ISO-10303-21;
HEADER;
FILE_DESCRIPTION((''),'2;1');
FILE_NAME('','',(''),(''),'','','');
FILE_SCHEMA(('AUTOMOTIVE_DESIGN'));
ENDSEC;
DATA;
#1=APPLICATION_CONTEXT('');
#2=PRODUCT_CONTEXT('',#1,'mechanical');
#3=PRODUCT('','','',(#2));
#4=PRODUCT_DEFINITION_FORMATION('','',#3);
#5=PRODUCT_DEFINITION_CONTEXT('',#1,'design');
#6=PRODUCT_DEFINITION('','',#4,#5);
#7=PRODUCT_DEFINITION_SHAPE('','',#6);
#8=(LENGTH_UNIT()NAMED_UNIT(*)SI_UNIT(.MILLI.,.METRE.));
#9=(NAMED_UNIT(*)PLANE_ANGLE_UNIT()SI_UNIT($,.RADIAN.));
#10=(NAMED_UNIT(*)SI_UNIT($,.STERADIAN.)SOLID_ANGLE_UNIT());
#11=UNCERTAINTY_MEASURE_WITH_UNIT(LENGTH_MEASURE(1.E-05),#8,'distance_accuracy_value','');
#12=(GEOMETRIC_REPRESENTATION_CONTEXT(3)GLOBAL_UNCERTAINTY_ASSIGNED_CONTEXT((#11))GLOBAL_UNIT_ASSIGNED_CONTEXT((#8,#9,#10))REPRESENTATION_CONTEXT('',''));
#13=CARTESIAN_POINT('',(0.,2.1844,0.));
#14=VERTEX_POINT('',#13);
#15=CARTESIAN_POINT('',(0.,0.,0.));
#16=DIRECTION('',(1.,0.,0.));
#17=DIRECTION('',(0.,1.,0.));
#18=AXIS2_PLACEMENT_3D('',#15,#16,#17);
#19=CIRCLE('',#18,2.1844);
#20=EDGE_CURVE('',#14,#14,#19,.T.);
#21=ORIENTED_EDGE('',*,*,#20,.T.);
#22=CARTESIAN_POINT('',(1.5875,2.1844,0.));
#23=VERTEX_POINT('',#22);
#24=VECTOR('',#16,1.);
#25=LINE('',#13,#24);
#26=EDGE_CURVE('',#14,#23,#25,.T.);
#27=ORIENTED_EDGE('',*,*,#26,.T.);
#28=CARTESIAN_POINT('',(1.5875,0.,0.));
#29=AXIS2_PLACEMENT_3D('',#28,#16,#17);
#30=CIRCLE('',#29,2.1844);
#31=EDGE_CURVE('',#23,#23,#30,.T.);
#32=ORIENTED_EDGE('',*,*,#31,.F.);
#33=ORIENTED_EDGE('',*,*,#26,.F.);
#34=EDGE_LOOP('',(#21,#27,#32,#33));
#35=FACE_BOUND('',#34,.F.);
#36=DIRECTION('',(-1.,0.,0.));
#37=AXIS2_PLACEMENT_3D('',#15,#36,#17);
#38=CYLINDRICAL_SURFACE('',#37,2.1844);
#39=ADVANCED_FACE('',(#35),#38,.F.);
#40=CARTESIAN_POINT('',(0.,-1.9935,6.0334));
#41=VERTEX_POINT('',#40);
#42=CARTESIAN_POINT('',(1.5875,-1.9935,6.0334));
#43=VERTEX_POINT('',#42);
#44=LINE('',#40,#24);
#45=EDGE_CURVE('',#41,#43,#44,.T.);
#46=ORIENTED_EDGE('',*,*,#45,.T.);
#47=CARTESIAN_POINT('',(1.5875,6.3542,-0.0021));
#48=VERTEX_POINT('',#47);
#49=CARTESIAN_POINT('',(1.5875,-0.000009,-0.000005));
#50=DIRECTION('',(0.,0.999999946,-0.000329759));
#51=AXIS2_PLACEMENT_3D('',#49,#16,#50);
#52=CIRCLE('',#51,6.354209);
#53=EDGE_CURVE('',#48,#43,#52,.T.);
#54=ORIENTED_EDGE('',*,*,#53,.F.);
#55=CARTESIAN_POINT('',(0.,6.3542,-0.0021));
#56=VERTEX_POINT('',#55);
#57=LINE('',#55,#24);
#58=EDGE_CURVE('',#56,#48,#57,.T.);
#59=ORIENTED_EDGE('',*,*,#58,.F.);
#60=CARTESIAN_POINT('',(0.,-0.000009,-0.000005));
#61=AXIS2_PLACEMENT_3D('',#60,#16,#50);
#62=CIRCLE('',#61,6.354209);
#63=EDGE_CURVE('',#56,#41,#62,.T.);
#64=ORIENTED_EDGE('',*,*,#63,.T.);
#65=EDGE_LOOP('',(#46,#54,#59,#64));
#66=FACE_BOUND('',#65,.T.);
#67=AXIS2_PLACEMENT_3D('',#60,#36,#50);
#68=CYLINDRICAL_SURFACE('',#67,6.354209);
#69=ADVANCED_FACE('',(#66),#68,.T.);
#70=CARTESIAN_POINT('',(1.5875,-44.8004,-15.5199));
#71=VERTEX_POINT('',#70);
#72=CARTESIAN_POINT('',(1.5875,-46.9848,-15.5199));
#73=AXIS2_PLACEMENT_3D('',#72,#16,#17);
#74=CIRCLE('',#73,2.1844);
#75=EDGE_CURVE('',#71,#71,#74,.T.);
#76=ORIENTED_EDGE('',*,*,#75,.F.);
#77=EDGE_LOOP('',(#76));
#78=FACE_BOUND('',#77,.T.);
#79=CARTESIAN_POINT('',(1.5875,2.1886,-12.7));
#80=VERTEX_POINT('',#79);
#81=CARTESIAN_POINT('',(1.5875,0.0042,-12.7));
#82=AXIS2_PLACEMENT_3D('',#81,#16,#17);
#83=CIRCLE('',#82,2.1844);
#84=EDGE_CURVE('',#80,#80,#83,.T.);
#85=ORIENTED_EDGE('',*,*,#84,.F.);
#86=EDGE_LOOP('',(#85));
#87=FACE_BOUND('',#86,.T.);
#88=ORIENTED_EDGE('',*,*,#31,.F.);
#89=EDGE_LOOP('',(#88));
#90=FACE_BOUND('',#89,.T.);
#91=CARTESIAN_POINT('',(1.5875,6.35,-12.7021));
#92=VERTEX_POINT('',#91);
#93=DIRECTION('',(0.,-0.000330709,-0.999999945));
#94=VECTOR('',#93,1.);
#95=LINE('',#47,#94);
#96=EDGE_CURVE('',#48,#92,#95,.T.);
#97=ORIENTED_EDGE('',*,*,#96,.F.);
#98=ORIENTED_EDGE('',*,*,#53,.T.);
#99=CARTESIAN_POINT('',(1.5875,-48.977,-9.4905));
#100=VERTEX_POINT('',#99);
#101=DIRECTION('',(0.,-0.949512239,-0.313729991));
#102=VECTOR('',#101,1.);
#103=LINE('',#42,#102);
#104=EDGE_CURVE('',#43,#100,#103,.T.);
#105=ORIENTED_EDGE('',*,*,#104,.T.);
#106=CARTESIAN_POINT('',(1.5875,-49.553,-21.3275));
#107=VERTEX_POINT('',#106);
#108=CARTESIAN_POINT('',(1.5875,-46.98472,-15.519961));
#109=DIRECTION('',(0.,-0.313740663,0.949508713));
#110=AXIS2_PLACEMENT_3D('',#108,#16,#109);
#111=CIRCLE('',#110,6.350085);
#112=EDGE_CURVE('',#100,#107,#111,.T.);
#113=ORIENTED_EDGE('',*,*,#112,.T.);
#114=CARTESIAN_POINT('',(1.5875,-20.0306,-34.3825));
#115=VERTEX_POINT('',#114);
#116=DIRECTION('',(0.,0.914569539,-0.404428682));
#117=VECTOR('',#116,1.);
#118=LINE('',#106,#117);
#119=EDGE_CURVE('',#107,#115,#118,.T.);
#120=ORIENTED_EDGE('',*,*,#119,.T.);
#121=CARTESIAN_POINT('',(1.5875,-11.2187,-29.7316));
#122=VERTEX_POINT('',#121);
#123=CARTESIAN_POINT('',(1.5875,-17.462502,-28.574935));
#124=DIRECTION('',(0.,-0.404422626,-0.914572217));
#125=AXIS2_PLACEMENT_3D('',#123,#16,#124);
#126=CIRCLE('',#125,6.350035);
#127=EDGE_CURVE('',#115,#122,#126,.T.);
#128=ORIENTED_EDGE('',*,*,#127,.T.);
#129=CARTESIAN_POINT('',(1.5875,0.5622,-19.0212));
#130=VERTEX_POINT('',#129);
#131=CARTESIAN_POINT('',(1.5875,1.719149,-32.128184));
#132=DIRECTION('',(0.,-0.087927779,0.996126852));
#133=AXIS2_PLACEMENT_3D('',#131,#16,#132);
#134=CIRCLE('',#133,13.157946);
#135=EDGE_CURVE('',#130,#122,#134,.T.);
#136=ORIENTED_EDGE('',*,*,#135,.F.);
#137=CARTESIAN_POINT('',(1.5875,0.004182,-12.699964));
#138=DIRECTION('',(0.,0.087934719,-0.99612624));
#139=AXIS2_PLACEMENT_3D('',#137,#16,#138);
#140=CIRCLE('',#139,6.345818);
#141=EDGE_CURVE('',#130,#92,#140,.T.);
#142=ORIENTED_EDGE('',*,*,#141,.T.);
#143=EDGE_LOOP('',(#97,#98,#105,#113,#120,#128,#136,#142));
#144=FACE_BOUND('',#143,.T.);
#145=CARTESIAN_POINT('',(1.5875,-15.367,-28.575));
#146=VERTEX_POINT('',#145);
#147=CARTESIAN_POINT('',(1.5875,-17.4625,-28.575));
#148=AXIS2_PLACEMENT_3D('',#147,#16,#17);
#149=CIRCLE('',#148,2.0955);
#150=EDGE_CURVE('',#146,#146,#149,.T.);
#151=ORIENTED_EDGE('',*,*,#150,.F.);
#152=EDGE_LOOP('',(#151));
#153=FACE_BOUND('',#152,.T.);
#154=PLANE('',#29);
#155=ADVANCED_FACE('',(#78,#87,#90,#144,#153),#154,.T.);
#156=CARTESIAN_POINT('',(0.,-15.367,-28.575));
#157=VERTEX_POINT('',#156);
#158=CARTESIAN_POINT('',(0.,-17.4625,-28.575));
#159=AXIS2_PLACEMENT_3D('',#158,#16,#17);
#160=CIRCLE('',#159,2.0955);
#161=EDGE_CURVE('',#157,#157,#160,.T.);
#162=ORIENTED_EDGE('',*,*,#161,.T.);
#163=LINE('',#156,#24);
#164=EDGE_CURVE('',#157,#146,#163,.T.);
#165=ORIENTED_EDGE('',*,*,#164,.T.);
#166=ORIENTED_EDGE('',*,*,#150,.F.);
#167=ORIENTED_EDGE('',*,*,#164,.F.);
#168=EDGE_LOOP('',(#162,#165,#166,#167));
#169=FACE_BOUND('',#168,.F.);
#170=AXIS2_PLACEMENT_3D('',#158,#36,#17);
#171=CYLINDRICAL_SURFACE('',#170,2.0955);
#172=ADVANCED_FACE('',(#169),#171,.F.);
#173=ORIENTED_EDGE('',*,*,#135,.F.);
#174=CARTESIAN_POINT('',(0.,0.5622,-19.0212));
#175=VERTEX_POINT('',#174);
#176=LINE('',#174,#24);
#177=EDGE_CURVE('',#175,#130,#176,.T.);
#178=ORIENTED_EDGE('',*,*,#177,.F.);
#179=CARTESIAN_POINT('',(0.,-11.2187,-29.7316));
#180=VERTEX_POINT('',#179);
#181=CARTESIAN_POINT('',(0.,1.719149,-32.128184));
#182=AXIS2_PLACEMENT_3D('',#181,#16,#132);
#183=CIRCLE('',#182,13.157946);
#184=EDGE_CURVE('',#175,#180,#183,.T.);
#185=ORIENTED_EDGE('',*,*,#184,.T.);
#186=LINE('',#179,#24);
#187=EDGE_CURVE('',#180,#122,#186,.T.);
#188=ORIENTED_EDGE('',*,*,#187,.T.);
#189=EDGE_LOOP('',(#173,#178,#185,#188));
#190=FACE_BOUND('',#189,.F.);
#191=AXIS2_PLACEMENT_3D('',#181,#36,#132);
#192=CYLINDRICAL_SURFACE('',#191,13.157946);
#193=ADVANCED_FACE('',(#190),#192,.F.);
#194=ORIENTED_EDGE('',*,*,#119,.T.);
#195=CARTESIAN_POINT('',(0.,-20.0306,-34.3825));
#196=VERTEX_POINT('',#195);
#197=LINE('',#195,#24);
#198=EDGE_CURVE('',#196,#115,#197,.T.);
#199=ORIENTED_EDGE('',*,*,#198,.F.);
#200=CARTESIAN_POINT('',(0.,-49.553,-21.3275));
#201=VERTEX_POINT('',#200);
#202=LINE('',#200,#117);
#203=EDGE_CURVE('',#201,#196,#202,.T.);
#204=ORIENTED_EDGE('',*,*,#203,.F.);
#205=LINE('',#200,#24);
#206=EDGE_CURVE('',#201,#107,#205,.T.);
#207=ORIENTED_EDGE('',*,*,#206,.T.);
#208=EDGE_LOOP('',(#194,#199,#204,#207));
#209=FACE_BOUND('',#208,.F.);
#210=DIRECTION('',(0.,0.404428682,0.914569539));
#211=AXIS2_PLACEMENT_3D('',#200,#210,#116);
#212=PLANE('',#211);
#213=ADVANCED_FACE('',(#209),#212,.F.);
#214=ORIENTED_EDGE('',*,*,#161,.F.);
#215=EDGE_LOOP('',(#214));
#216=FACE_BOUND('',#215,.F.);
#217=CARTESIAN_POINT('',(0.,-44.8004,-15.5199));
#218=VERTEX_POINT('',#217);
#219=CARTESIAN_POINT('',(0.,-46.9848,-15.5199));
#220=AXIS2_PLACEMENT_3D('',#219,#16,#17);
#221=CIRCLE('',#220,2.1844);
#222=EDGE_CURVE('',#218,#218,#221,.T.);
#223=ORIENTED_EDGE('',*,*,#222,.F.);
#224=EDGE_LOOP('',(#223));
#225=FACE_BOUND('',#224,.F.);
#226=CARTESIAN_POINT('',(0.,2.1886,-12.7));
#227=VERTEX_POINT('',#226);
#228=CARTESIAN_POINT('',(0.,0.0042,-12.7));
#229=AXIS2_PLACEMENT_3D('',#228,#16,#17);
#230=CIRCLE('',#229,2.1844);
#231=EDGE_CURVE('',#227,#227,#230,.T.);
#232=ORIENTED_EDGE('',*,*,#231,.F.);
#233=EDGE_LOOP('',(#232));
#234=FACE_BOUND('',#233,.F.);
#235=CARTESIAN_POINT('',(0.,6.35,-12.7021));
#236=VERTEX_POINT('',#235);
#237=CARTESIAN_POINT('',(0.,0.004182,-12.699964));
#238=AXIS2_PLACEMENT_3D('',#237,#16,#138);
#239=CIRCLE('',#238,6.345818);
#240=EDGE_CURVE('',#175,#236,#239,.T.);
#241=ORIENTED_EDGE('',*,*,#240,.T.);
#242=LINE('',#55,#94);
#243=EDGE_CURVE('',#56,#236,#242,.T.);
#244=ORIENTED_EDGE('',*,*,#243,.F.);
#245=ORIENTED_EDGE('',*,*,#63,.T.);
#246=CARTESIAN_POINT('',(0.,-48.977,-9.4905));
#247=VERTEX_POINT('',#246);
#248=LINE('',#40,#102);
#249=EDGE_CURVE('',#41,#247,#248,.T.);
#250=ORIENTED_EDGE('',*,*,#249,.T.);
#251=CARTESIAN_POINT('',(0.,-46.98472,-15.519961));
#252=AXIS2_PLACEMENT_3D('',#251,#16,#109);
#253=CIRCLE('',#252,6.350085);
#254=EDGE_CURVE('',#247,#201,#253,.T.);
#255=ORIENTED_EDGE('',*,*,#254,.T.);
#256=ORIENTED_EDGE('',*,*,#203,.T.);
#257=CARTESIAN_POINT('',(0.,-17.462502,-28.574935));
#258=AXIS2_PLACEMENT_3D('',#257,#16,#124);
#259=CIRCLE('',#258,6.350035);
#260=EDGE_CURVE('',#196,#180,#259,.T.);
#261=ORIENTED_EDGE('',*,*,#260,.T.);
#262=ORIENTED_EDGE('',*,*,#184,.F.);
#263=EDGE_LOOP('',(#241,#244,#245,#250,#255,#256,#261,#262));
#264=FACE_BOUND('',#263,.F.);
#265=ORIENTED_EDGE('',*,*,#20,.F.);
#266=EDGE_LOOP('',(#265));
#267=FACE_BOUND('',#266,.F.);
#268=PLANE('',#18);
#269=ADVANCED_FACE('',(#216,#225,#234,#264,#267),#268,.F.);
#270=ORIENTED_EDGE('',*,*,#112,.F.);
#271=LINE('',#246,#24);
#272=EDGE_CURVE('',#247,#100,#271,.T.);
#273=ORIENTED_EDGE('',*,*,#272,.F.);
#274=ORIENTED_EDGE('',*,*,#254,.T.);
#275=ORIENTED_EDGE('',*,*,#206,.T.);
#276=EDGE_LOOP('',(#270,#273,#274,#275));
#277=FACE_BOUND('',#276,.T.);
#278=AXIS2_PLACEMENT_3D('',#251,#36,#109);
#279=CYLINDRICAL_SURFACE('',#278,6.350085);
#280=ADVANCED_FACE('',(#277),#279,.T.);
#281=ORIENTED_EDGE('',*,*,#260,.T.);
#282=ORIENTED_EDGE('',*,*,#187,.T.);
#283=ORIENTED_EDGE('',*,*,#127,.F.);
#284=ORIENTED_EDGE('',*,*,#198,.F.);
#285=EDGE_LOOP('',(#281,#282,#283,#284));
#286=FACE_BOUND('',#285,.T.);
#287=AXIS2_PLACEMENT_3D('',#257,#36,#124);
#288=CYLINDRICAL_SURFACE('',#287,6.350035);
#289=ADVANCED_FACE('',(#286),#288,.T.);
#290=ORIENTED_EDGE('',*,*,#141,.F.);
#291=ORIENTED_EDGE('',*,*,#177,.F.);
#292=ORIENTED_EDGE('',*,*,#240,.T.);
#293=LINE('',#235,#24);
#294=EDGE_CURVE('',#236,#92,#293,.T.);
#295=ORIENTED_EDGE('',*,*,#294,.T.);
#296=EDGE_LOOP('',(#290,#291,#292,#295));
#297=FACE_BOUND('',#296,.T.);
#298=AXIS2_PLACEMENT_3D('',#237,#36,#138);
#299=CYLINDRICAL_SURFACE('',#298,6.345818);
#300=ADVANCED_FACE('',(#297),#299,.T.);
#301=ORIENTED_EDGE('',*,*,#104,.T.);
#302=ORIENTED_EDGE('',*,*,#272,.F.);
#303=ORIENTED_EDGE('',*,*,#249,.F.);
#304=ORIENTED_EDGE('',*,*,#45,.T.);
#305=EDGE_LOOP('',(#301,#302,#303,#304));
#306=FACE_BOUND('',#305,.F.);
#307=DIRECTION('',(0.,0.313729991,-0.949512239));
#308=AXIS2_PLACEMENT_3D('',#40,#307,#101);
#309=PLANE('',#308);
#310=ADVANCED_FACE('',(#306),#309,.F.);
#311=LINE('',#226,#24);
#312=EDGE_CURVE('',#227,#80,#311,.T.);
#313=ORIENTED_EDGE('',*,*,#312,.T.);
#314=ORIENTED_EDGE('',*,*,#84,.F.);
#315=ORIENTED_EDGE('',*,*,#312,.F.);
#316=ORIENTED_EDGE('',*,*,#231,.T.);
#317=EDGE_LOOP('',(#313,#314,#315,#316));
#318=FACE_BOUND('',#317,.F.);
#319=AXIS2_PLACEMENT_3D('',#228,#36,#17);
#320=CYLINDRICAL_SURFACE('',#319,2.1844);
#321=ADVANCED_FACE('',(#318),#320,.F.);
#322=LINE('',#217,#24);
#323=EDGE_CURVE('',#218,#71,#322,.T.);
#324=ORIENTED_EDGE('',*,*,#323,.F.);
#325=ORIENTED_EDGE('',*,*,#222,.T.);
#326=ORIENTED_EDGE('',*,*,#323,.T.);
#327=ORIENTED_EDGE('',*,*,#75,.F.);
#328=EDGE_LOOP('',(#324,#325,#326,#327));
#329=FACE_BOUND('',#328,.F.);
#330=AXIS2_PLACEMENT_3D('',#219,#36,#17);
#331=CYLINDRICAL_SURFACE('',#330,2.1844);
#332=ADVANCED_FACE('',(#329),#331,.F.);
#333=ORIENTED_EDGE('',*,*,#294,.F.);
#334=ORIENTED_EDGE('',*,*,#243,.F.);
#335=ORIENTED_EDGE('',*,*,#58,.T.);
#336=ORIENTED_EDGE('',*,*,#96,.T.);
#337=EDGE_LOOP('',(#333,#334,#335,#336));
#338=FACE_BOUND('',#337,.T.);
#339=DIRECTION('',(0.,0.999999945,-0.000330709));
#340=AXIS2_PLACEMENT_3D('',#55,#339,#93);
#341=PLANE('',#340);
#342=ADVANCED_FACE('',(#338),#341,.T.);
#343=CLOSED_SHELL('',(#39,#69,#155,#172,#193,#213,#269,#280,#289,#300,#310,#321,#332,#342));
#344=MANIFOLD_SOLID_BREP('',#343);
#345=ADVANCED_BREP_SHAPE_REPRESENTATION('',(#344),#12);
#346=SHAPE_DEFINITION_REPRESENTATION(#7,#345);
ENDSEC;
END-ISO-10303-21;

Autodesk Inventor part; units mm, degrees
ref_plane "YZ Plane" through (0, 0, 0) normal (1, 0, 0) x (0, 1, 0)
ref_plane "XZ Plane" through (0, 0, 0) normal (0, 1, 0) x (-1, 0, 0)
ref_plane "XY Plane" through (0, 0, 0) normal (0, 0, 1) x (1, 0, 0)
sketch "maiin" plane through (0, 0, 0) normal (0, 0, 1) x (1, 0, 0)
  circle A0 centre (-0.0182, -20.0228) radius 2.1844
  circle A1 centre (12.6818, -20.0228) radius 2.1844
  circle A2 centre (-2.8225, 26.9672) radius 2.1844 construction
  arc A3 (-6.3396, -20.5787) -> (-0.0224, -26.3686) centre (-0.0182, -20.0228) ccw
  arc A4 (12.6776, -26.377) -> (18.7159, -18.0313) centre (12.6818, -20.0228) ccw
  arc A5 (3.2076, 28.9574) -> (-8.6291, 29.5373) centre (-2.8225, 26.9672) ccw
  arc A6 (-21.694, 0.0193) -> (-17.0461, -8.7942) centre (-15.8874, -2.5508) ccw
  circle A7 centre (-15.8874, -2.5508) radius 2.0955
  line L0 (18.7159, -18.0313) -> (3.2076, 28.9574)
  line L1 (12.6776, -26.377) -> (-0.0224, -26.3686)
  line L2 (-8.6291, 29.5373) -> (-21.694, 0.0193)
  circle A8 centre (-2.8225, 26.9672) radius 2.1844
  arc A9 (-6.3396, -20.5787) -> (-17.0461, -8.7942) centre (-19.447, -21.7313) ccw
  point P0 (3.1417, -3.9392)
  dimension "d0" = 12.7
  dimension "d1" = 12.7
  dimension "d2" = 4.191
  dimension "d3" = 4.3688
  dimension "d7" = 46.99
sketch "Sketch1" plane through (0, 0, 0) normal (1, 0, 0) x (0, 1, 0)
  circle A0 centre (0.0042, -12.7) radius 2.1844
  circle A1 centre (0, 0) radius 2.1844
  circle A2 centre (-46.9848, -15.5199) radius 2.1844 construction
  arc A3 (0.5622, -19.0212) -> (6.35, -12.7021) centre (0.0042, -12.7) ccw
  arc A4 (6.3542, -0.0021) -> (-1.9935, 6.0334) centre (0, 0) ccw
  arc A5 (-48.977, -9.4905) -> (-49.553, -21.3275) centre (-46.9848, -15.5199) ccw
  arc A6 (-20.0306, -34.3825) -> (-11.2187, -29.7316) centre (-17.4625, -28.575) ccw
  circle A7 centre (-17.4625, -28.575) radius 2.0955
  line L0 (-1.9935, 6.0334) -> (-48.977, -9.4905)
  line L1 (6.3542, -0.0021) -> (6.35, -12.7021)
  line L2 (-49.553, -21.3275) -> (-20.0306, -34.3825)
  circle A8 centre (-46.9848, -15.5199) radius 2.1844
  arc A9 (0.5622, -19.0212) -> (-11.2187, -29.7316) centre (1.7192, -32.1283) ccw
  point P0 (0, 0)
extrude "Extrusion1" add sketch "Sketch1" along normal blind 1.5875
properties part number "bottom_joint_gusset"
